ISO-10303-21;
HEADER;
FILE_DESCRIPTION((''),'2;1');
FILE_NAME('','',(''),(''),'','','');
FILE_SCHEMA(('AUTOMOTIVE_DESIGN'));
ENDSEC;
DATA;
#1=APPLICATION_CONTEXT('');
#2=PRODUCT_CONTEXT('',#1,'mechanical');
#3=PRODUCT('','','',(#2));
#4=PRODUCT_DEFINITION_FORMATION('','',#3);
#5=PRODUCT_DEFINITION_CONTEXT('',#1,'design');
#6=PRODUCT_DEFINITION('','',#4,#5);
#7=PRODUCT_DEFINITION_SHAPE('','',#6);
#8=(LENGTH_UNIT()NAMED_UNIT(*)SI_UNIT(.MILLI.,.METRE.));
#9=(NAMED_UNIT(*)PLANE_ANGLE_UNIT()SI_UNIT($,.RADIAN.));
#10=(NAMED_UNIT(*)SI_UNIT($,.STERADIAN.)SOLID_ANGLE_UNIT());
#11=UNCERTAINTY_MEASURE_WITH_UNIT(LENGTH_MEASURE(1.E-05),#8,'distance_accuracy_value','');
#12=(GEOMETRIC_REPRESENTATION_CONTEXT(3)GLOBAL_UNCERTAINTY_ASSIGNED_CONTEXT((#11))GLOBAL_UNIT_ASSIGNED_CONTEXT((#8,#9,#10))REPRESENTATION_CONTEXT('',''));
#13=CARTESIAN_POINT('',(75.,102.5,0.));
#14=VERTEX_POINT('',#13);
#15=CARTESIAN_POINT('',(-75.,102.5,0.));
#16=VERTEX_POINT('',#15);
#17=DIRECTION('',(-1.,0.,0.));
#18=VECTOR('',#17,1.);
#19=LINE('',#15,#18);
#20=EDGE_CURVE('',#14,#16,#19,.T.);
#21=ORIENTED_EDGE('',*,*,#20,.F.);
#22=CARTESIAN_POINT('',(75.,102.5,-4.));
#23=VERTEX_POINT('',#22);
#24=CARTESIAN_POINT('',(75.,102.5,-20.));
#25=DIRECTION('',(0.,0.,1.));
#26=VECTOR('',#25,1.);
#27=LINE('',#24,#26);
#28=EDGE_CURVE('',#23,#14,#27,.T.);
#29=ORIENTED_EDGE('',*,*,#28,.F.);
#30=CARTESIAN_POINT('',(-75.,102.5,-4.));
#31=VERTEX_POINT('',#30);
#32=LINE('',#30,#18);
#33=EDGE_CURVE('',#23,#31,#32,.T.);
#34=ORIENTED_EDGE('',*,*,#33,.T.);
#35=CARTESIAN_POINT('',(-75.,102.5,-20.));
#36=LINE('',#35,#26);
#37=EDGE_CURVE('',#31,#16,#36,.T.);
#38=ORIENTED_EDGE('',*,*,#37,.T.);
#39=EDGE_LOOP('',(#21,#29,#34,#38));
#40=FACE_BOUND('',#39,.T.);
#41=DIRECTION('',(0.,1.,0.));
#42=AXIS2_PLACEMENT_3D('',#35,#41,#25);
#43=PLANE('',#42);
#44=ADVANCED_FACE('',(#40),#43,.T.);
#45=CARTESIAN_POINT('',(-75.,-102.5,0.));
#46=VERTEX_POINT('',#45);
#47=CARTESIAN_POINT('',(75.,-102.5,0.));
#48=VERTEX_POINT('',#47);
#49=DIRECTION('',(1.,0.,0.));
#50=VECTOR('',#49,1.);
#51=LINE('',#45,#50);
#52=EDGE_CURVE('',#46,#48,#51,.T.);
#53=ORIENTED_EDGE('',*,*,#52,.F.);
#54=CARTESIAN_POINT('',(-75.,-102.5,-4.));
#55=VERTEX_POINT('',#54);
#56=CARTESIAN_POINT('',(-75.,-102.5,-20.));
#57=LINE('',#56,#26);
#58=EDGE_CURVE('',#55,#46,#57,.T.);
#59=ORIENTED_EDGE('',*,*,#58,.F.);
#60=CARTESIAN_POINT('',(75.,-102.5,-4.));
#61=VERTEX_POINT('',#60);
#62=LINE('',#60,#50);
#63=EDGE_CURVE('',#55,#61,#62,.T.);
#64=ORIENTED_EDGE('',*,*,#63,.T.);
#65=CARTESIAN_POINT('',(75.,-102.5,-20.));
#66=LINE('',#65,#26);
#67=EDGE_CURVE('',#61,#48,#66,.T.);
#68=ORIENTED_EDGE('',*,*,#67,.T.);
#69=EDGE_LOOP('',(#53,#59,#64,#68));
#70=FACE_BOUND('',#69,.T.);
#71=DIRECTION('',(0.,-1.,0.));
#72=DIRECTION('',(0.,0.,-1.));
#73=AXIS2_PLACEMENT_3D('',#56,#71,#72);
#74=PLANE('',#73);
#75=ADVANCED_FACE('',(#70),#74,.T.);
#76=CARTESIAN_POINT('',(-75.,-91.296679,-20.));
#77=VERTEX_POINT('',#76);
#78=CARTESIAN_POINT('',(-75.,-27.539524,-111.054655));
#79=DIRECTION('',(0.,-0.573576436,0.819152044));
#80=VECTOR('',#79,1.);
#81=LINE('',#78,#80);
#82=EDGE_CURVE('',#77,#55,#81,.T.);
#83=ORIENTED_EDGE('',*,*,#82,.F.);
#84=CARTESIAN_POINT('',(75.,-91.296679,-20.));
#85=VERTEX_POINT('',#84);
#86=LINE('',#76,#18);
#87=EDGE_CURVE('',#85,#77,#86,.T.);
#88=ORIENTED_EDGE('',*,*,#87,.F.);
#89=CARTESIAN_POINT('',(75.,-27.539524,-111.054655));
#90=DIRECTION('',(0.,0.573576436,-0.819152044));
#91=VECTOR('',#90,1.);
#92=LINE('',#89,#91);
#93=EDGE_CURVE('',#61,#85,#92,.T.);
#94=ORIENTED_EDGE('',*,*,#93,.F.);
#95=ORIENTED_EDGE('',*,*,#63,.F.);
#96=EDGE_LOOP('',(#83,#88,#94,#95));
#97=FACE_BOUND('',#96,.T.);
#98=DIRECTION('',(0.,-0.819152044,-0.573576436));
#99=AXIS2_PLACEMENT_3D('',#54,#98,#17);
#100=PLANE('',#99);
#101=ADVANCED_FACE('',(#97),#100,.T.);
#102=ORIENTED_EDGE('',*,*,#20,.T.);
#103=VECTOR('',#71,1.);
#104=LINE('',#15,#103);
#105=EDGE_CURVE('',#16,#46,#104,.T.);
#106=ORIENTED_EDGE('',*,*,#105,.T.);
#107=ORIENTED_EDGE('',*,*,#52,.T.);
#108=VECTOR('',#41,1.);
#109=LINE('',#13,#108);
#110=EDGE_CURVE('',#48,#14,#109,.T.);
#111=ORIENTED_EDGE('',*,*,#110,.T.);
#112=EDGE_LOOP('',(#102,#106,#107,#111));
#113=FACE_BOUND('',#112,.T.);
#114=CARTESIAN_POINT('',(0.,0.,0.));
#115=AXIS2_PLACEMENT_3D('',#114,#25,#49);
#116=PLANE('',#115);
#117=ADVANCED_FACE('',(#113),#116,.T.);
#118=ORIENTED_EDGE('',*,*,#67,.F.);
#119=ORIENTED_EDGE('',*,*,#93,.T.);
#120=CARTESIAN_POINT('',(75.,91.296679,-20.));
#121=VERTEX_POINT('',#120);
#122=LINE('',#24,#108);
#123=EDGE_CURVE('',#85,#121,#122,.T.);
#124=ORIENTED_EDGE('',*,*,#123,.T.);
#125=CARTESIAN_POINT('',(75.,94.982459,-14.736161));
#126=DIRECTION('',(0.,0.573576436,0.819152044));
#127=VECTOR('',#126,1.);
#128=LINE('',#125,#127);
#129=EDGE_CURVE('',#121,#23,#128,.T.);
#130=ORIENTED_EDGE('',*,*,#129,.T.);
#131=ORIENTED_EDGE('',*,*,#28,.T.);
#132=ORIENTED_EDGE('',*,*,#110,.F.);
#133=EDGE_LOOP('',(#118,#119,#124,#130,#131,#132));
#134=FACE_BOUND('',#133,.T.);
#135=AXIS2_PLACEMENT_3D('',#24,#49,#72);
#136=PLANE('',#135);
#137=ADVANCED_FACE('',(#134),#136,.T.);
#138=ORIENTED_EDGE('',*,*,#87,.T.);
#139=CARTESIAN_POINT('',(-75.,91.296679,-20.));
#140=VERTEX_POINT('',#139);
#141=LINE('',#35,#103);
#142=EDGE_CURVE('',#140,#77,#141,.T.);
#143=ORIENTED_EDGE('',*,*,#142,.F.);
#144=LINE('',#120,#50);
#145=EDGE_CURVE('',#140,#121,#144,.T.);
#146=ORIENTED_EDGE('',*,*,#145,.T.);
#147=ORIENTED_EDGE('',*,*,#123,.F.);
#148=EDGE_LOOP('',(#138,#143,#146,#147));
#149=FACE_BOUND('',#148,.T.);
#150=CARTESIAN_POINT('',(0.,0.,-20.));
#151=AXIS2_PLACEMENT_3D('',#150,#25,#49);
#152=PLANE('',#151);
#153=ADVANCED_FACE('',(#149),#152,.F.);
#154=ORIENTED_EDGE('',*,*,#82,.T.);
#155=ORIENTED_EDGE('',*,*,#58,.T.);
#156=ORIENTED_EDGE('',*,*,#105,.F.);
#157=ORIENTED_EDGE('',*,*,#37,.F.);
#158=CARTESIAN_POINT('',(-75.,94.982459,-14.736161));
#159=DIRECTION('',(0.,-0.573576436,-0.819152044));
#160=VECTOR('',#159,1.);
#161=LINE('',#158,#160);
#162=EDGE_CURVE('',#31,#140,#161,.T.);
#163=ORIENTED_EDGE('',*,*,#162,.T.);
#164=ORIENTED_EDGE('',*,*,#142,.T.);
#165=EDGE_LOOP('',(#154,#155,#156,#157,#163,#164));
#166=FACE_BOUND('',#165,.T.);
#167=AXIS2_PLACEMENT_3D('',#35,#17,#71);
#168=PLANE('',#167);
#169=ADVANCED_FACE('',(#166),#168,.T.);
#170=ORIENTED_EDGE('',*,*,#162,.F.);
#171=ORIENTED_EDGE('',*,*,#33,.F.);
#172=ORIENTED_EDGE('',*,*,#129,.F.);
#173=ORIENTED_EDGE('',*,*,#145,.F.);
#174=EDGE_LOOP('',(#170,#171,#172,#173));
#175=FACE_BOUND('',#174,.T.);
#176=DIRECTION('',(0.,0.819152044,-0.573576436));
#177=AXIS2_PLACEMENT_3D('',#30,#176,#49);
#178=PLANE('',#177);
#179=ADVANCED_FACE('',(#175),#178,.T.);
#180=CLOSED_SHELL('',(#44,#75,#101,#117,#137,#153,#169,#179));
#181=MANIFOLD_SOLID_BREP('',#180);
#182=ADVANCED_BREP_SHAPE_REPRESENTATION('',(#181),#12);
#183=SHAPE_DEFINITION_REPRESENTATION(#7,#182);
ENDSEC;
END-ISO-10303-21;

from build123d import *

# Parameters (mm, degrees)
SKETCH_1_W             = 150
SKETCH_1_H             = 205
SM_BASE_FLANGE_1_DEPTH = 20
CHAMFER_1_SIZE         = 16
CHAMFER_1_SIZE2        = 11.203320611
CHAMFER_2_SIZE         = 16
CHAMFER_2_SIZE2        = 11.203320611


# Sheet-metal steps are written as plain solids
with BuildPart() as part:
    # Sketch 1 → 基体-法兰1 (new body)
    with BuildSketch(Plane.XY):
        Rectangle(SKETCH_1_W, SKETCH_1_H)
    extrude(amount=-SM_BASE_FLANGE_1_DEPTH)

    # 倒角1
    chamfer_1_edges = [part.edges().sort_by_distance(p)[0] for p in [
        (0, 102.5, -20),
    ]]
    chamfer_1_side = [part.faces().sort_by_distance(p)[0] for p in [
        (0, 102.5, -10),
    ]]
    chamfer(chamfer_1_edges, length=CHAMFER_1_SIZE, length2=CHAMFER_1_SIZE2, reference=chamfer_1_side[0])

    # 倒角2
    chamfer_2_edges = [part.edges().sort_by_distance(p)[0] for p in [
        (0, -102.5, -20),
    ]]
    chamfer_2_side = [part.faces().sort_by_distance(p)[0] for p in [
        (0, -102.5, -10),
    ]]
    chamfer(chamfer_2_edges, length=CHAMFER_2_SIZE, length2=CHAMFER_2_SIZE2, reference=chamfer_2_side[0])


solid = part.part
